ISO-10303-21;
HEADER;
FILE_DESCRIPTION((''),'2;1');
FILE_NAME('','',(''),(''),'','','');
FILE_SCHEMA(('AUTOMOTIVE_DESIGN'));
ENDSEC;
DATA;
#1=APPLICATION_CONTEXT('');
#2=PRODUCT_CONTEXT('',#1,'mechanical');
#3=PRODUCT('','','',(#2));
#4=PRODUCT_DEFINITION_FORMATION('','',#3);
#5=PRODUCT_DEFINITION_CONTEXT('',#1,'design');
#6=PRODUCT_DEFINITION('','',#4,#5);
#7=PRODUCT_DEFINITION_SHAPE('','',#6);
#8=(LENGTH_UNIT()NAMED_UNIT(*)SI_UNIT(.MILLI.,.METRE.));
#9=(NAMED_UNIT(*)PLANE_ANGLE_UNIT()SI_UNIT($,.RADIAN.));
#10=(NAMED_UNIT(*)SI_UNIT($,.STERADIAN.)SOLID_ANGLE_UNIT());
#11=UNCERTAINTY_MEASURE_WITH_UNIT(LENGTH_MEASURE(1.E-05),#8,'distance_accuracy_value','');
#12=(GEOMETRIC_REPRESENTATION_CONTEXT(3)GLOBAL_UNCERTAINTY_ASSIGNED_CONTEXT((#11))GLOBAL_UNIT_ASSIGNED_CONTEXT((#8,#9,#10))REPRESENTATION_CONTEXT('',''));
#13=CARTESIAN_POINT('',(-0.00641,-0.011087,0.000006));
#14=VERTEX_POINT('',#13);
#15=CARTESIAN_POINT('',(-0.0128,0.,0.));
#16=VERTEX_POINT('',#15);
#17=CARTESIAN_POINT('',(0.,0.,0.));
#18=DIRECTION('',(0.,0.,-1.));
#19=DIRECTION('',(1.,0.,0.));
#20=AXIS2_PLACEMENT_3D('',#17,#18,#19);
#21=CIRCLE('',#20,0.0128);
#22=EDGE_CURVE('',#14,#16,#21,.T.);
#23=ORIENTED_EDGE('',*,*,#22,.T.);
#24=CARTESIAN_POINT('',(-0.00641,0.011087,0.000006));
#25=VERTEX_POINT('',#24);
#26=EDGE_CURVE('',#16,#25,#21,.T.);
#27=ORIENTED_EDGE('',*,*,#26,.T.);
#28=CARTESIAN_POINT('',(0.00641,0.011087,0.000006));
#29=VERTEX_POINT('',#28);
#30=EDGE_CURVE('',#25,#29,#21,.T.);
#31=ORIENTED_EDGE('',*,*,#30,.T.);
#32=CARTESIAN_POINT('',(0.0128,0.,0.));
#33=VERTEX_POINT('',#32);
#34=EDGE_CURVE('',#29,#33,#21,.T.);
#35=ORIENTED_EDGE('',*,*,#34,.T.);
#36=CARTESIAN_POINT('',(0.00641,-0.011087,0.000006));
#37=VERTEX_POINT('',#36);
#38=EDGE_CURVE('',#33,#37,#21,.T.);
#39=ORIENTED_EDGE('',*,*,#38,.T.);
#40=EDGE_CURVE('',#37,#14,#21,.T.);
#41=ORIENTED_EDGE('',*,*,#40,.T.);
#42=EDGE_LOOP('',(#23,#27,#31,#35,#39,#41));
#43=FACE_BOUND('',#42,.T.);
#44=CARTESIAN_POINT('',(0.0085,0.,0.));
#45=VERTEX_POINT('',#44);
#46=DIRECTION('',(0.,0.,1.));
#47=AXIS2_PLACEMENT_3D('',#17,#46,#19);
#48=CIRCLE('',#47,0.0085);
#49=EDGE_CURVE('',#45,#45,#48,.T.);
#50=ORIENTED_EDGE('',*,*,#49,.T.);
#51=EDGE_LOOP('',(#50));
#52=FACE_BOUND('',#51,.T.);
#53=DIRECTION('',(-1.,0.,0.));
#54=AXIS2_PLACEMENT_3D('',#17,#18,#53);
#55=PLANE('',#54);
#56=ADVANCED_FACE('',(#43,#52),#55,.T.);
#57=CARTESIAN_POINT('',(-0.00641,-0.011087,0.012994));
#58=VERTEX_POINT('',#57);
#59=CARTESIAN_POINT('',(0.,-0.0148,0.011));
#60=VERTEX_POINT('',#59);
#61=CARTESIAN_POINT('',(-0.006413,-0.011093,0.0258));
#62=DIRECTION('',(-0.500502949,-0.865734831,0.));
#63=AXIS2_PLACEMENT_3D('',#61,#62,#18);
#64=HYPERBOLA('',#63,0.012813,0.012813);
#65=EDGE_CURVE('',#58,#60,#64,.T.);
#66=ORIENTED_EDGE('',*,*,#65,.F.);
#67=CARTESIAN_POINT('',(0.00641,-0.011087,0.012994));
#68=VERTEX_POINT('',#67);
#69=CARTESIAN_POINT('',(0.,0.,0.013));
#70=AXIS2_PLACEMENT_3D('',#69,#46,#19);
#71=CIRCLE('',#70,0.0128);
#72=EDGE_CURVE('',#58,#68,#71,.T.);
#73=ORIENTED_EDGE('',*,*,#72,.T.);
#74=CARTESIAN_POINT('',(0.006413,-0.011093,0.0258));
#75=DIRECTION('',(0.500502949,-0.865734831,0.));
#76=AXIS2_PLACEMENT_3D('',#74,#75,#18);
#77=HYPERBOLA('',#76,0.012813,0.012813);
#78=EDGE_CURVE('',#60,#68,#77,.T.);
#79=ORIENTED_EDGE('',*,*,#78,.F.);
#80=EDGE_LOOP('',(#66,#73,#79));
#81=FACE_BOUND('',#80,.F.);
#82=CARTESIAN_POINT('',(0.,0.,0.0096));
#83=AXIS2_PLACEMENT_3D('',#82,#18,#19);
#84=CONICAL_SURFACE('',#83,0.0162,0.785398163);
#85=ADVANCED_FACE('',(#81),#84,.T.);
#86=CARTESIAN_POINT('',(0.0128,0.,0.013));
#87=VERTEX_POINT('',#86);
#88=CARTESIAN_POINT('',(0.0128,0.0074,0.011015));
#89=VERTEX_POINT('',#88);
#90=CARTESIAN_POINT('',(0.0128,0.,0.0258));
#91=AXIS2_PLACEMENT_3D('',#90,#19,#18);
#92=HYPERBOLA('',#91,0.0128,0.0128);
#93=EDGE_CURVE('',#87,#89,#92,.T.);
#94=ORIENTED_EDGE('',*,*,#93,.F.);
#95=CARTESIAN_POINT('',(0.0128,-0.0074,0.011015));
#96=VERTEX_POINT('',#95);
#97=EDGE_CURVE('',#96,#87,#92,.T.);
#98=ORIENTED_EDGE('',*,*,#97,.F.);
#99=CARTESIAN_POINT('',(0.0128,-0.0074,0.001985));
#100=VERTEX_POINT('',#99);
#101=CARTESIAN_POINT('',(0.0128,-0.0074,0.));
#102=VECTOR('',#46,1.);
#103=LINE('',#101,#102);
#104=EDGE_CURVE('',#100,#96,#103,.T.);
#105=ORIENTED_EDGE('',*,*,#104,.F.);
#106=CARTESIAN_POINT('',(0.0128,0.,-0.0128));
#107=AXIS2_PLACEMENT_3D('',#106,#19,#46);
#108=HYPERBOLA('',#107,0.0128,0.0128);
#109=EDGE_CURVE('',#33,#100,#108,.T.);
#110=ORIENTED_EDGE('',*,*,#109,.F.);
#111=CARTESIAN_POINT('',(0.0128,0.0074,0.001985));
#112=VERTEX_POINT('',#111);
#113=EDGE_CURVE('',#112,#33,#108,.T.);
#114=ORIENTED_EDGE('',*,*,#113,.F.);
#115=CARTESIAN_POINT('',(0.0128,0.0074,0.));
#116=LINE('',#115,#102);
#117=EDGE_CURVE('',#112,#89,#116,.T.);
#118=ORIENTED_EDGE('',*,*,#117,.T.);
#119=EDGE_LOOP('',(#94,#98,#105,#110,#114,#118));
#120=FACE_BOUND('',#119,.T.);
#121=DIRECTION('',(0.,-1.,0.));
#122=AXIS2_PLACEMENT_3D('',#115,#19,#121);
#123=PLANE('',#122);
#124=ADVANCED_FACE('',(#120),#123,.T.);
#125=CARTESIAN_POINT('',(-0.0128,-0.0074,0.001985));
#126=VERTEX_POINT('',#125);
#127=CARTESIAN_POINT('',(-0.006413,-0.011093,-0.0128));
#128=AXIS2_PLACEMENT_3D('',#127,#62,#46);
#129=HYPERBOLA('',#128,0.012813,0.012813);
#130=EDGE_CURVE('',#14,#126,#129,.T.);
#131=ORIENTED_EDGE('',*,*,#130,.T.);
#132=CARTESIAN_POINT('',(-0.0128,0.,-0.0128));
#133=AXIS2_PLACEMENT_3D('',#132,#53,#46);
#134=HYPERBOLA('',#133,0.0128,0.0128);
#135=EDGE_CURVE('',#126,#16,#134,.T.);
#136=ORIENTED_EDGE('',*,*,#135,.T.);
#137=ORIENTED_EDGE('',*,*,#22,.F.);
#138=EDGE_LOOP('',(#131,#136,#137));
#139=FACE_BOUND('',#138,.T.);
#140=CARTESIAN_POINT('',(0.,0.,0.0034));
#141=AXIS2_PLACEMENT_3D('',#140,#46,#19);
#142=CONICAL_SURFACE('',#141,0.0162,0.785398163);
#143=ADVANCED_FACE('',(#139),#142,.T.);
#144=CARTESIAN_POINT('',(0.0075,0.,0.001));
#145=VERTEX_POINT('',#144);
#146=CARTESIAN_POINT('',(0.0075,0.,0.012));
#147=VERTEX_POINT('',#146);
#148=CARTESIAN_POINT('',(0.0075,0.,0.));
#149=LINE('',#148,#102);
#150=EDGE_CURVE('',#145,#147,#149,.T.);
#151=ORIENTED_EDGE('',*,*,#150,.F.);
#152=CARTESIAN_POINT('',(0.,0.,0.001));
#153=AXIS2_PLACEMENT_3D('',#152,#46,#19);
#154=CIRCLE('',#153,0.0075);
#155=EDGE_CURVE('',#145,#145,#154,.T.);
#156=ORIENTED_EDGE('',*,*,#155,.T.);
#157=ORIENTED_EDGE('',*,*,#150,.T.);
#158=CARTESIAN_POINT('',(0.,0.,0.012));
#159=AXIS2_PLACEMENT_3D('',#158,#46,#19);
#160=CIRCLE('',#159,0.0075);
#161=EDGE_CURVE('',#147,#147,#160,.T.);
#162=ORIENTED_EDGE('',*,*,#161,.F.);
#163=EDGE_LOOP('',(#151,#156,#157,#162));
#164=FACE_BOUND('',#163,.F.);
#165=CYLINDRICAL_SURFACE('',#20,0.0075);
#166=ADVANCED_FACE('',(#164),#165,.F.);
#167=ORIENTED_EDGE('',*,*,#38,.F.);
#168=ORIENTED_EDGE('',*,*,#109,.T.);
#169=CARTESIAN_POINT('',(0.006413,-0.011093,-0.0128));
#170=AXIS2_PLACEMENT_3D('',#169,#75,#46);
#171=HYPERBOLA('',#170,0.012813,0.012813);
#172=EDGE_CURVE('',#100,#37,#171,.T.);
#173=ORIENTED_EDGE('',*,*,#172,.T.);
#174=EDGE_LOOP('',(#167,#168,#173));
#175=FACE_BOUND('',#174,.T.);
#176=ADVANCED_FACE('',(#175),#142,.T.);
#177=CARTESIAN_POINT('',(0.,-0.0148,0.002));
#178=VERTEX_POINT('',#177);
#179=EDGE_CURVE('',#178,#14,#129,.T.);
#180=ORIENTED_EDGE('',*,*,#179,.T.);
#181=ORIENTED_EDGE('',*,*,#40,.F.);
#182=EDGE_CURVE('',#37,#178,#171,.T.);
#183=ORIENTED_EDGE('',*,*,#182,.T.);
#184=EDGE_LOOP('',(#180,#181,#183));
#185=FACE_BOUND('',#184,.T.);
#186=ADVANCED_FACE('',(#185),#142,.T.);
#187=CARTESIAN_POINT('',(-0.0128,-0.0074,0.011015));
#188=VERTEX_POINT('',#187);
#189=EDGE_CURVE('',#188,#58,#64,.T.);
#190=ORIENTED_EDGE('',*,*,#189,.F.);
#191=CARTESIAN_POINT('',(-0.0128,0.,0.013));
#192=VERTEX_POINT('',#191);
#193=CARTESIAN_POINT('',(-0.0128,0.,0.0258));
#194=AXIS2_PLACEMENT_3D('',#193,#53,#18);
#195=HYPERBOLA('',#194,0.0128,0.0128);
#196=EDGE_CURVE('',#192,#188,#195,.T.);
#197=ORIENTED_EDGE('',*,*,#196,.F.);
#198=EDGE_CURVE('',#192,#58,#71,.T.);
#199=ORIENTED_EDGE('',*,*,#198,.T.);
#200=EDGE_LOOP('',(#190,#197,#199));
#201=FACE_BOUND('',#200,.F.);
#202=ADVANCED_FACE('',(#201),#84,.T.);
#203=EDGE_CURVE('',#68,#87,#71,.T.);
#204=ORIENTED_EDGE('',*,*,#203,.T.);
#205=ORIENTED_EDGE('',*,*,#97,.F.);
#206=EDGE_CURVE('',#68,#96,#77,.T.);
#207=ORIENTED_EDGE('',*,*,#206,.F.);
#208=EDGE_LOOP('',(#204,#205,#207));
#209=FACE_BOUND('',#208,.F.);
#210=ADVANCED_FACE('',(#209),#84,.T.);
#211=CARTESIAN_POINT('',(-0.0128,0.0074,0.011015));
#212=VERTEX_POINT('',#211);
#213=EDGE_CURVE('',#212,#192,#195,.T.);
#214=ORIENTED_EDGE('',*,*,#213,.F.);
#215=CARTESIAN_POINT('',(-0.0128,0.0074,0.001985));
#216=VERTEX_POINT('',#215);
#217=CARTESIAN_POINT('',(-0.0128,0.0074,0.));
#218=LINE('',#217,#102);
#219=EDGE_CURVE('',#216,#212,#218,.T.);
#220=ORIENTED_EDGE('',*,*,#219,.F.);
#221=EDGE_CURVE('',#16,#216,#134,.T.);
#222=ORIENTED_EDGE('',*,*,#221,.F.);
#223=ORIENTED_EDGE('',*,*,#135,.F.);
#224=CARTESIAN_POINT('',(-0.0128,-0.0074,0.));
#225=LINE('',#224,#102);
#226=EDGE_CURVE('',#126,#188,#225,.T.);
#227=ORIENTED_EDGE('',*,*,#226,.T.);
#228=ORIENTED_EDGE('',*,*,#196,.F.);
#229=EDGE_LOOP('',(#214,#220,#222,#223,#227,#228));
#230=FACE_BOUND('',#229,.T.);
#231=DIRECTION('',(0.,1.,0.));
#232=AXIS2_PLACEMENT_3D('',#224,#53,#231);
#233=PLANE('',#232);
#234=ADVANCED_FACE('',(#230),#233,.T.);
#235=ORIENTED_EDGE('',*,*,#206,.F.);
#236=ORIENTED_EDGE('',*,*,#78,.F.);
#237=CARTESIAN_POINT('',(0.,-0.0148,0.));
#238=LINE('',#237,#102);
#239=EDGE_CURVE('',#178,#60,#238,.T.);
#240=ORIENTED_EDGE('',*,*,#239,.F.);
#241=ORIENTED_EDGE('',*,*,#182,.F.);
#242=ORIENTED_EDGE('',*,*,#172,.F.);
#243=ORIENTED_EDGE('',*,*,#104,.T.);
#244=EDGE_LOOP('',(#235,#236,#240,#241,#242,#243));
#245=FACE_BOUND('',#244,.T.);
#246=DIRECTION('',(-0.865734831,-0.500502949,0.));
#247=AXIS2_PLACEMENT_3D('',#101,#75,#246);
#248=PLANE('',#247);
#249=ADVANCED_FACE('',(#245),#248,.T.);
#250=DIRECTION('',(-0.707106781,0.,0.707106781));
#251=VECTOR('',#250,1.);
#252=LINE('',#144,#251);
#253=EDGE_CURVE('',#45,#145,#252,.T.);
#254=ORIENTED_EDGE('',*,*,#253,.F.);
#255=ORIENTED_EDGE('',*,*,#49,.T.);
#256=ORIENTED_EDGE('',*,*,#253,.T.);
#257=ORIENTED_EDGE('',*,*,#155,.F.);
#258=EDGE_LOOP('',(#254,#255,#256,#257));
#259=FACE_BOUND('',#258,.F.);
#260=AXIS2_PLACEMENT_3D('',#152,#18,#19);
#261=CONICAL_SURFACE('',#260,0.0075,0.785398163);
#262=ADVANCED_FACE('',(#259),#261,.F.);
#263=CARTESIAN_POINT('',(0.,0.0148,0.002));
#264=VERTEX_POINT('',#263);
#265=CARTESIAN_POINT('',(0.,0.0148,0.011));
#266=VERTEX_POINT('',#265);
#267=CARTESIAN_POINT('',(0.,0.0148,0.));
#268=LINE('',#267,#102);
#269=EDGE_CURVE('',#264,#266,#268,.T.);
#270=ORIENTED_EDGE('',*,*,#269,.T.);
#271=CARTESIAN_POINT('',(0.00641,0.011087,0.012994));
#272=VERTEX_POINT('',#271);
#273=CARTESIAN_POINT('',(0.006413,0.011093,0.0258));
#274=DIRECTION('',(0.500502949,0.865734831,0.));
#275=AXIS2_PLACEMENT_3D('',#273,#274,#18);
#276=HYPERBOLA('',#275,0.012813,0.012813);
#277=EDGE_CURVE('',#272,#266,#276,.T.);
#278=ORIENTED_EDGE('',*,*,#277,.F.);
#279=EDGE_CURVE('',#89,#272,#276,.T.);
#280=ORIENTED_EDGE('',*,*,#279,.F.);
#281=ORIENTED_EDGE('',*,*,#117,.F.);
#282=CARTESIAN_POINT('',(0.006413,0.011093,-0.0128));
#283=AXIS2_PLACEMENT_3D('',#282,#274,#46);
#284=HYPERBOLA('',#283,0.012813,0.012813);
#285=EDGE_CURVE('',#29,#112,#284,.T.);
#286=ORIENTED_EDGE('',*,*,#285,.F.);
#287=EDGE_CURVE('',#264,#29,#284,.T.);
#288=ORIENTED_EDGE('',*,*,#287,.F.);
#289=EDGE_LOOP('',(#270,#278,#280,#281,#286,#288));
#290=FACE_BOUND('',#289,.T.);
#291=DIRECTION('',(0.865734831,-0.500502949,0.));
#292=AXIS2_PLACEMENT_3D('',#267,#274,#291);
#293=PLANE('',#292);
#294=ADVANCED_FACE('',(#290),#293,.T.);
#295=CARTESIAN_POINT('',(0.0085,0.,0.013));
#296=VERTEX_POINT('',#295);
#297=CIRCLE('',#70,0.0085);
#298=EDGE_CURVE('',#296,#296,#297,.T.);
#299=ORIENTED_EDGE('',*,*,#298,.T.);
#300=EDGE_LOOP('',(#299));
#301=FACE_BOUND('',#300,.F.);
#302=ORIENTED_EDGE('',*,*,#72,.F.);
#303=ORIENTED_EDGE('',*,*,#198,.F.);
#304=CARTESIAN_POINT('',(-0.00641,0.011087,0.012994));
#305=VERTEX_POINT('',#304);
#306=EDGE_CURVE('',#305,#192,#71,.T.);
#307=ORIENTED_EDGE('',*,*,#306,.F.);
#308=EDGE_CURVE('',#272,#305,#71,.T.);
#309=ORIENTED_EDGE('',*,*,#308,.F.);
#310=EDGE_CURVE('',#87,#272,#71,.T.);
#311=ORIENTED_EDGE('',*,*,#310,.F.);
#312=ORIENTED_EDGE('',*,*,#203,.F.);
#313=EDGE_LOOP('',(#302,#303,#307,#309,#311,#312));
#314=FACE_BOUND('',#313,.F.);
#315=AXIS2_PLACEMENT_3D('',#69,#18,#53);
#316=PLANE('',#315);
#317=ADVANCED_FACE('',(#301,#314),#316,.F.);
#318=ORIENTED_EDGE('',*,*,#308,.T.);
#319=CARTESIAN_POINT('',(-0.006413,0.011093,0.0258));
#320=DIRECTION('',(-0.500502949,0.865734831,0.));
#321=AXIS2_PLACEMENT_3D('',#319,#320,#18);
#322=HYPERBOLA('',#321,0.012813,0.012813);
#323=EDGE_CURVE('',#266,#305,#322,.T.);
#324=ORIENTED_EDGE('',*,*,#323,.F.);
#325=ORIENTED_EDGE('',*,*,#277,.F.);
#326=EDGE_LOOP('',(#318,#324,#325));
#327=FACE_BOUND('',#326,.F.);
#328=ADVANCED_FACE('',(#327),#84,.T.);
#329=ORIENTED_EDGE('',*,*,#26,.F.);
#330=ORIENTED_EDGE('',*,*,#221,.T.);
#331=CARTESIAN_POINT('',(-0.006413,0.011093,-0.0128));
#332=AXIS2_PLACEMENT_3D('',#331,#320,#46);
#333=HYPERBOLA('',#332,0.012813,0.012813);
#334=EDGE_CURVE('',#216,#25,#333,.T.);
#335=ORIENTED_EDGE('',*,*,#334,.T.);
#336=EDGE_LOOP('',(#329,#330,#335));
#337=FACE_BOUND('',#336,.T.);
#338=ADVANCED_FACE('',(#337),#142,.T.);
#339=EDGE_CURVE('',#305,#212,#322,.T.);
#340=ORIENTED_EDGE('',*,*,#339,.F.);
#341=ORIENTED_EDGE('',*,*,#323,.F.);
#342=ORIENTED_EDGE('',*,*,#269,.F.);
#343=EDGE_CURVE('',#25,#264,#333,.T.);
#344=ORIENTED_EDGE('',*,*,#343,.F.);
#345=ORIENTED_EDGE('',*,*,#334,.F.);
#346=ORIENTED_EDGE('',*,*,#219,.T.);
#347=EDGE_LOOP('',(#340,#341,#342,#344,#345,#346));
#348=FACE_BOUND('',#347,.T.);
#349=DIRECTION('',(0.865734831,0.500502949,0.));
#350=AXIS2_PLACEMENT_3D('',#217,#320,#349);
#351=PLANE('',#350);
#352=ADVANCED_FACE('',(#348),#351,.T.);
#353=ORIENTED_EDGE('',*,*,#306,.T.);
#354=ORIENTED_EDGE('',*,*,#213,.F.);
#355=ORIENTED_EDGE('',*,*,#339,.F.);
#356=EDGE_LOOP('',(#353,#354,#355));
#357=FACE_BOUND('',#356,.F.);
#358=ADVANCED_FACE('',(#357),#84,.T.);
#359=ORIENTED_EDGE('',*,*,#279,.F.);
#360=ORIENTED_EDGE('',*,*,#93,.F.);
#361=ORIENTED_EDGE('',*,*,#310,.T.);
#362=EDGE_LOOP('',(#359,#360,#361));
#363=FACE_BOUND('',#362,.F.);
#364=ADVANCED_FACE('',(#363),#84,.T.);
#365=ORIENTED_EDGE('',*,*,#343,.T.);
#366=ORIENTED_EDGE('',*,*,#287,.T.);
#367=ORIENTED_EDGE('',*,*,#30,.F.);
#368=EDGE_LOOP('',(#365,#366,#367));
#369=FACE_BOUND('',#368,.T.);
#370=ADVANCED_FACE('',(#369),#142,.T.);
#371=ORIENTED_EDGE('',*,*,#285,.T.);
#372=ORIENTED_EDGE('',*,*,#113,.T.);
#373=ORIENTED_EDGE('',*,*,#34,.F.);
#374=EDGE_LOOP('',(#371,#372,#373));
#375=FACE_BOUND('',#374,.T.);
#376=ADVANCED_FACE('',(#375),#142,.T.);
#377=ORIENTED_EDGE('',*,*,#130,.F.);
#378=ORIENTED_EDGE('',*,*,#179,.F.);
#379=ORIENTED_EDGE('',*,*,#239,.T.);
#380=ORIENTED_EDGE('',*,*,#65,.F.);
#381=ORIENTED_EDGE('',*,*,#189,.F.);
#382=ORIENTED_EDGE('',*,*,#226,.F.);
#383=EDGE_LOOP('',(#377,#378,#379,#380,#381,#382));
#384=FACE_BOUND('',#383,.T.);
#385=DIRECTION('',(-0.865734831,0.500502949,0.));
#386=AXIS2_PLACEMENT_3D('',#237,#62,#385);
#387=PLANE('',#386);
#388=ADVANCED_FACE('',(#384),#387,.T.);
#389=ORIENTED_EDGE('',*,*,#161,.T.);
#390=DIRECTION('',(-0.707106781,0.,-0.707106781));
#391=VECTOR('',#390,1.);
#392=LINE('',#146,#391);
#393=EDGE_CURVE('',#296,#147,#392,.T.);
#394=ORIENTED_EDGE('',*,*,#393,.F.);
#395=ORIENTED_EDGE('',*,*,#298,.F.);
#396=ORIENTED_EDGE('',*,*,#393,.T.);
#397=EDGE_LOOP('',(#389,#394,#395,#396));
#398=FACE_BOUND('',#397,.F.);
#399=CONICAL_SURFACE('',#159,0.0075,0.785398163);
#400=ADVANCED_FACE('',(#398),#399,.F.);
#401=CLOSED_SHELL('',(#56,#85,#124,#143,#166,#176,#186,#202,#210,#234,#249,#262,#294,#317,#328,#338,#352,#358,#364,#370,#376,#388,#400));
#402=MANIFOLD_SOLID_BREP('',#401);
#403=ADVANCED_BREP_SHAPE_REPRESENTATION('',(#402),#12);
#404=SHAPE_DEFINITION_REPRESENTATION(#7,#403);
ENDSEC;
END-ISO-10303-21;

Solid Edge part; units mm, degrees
sketch "Sketch1" plane through (0, 0, 0) normal (0, 0, 1) x (1, 0, 0)
  circle A0 centre (0, 0) radius 0.0075
  line L0 (0, 0.0148) -> (0.0128, 0.0074)
  line L1 (0.0128, 0.0074) -> (0.0128, -0.0074)
  line L2 (0.0128, -0.0074) -> (0, -0.0148)
  line L3 (0, -0.0148) -> (-0.0128, -0.0074)
  line L4 (-0.0128, -0.0074) -> (-0.0128, 0.0074)
  line L5 (-0.0128, 0.0074) -> (0, 0.0148)
  dimension "D1" = 0.0296
  dimension "D2" = 0.015
extrude "Protrusion1" add sketch "Sketch1" along normal blind 0.013
sketch "Sketch2" plane through (0, 0, 0) normal (0, -1, 0) x (1, 0, 0)
  line L0 (0.0162, 0.0096) -> (0.0077, 0.0181)
  line L1 (0.0172, 0.0181) -> (0.0077, 0.0181)
  line L2 (0.0172, -0.0051) -> (0.0172, 0.0181)
  line L3 (0.0077, -0.0051) -> (0.0172, -0.0051)
  line L4 (0.0162, 0.0034) -> (0.0077, -0.0051)
  line L5 (0.0162, 0.0096) -> (0.0162, 0.0034)
revolve "RevolvedCutout1" cut sketch "Sketch2" angle 360 about axis through (0, 0, 54) along (0, 0, -1)
chamfer "Fase_1" distance 0.001 angle 45 2 edges at (-0.0075, 0, 0.013) (-0.0075, 0, 0)
